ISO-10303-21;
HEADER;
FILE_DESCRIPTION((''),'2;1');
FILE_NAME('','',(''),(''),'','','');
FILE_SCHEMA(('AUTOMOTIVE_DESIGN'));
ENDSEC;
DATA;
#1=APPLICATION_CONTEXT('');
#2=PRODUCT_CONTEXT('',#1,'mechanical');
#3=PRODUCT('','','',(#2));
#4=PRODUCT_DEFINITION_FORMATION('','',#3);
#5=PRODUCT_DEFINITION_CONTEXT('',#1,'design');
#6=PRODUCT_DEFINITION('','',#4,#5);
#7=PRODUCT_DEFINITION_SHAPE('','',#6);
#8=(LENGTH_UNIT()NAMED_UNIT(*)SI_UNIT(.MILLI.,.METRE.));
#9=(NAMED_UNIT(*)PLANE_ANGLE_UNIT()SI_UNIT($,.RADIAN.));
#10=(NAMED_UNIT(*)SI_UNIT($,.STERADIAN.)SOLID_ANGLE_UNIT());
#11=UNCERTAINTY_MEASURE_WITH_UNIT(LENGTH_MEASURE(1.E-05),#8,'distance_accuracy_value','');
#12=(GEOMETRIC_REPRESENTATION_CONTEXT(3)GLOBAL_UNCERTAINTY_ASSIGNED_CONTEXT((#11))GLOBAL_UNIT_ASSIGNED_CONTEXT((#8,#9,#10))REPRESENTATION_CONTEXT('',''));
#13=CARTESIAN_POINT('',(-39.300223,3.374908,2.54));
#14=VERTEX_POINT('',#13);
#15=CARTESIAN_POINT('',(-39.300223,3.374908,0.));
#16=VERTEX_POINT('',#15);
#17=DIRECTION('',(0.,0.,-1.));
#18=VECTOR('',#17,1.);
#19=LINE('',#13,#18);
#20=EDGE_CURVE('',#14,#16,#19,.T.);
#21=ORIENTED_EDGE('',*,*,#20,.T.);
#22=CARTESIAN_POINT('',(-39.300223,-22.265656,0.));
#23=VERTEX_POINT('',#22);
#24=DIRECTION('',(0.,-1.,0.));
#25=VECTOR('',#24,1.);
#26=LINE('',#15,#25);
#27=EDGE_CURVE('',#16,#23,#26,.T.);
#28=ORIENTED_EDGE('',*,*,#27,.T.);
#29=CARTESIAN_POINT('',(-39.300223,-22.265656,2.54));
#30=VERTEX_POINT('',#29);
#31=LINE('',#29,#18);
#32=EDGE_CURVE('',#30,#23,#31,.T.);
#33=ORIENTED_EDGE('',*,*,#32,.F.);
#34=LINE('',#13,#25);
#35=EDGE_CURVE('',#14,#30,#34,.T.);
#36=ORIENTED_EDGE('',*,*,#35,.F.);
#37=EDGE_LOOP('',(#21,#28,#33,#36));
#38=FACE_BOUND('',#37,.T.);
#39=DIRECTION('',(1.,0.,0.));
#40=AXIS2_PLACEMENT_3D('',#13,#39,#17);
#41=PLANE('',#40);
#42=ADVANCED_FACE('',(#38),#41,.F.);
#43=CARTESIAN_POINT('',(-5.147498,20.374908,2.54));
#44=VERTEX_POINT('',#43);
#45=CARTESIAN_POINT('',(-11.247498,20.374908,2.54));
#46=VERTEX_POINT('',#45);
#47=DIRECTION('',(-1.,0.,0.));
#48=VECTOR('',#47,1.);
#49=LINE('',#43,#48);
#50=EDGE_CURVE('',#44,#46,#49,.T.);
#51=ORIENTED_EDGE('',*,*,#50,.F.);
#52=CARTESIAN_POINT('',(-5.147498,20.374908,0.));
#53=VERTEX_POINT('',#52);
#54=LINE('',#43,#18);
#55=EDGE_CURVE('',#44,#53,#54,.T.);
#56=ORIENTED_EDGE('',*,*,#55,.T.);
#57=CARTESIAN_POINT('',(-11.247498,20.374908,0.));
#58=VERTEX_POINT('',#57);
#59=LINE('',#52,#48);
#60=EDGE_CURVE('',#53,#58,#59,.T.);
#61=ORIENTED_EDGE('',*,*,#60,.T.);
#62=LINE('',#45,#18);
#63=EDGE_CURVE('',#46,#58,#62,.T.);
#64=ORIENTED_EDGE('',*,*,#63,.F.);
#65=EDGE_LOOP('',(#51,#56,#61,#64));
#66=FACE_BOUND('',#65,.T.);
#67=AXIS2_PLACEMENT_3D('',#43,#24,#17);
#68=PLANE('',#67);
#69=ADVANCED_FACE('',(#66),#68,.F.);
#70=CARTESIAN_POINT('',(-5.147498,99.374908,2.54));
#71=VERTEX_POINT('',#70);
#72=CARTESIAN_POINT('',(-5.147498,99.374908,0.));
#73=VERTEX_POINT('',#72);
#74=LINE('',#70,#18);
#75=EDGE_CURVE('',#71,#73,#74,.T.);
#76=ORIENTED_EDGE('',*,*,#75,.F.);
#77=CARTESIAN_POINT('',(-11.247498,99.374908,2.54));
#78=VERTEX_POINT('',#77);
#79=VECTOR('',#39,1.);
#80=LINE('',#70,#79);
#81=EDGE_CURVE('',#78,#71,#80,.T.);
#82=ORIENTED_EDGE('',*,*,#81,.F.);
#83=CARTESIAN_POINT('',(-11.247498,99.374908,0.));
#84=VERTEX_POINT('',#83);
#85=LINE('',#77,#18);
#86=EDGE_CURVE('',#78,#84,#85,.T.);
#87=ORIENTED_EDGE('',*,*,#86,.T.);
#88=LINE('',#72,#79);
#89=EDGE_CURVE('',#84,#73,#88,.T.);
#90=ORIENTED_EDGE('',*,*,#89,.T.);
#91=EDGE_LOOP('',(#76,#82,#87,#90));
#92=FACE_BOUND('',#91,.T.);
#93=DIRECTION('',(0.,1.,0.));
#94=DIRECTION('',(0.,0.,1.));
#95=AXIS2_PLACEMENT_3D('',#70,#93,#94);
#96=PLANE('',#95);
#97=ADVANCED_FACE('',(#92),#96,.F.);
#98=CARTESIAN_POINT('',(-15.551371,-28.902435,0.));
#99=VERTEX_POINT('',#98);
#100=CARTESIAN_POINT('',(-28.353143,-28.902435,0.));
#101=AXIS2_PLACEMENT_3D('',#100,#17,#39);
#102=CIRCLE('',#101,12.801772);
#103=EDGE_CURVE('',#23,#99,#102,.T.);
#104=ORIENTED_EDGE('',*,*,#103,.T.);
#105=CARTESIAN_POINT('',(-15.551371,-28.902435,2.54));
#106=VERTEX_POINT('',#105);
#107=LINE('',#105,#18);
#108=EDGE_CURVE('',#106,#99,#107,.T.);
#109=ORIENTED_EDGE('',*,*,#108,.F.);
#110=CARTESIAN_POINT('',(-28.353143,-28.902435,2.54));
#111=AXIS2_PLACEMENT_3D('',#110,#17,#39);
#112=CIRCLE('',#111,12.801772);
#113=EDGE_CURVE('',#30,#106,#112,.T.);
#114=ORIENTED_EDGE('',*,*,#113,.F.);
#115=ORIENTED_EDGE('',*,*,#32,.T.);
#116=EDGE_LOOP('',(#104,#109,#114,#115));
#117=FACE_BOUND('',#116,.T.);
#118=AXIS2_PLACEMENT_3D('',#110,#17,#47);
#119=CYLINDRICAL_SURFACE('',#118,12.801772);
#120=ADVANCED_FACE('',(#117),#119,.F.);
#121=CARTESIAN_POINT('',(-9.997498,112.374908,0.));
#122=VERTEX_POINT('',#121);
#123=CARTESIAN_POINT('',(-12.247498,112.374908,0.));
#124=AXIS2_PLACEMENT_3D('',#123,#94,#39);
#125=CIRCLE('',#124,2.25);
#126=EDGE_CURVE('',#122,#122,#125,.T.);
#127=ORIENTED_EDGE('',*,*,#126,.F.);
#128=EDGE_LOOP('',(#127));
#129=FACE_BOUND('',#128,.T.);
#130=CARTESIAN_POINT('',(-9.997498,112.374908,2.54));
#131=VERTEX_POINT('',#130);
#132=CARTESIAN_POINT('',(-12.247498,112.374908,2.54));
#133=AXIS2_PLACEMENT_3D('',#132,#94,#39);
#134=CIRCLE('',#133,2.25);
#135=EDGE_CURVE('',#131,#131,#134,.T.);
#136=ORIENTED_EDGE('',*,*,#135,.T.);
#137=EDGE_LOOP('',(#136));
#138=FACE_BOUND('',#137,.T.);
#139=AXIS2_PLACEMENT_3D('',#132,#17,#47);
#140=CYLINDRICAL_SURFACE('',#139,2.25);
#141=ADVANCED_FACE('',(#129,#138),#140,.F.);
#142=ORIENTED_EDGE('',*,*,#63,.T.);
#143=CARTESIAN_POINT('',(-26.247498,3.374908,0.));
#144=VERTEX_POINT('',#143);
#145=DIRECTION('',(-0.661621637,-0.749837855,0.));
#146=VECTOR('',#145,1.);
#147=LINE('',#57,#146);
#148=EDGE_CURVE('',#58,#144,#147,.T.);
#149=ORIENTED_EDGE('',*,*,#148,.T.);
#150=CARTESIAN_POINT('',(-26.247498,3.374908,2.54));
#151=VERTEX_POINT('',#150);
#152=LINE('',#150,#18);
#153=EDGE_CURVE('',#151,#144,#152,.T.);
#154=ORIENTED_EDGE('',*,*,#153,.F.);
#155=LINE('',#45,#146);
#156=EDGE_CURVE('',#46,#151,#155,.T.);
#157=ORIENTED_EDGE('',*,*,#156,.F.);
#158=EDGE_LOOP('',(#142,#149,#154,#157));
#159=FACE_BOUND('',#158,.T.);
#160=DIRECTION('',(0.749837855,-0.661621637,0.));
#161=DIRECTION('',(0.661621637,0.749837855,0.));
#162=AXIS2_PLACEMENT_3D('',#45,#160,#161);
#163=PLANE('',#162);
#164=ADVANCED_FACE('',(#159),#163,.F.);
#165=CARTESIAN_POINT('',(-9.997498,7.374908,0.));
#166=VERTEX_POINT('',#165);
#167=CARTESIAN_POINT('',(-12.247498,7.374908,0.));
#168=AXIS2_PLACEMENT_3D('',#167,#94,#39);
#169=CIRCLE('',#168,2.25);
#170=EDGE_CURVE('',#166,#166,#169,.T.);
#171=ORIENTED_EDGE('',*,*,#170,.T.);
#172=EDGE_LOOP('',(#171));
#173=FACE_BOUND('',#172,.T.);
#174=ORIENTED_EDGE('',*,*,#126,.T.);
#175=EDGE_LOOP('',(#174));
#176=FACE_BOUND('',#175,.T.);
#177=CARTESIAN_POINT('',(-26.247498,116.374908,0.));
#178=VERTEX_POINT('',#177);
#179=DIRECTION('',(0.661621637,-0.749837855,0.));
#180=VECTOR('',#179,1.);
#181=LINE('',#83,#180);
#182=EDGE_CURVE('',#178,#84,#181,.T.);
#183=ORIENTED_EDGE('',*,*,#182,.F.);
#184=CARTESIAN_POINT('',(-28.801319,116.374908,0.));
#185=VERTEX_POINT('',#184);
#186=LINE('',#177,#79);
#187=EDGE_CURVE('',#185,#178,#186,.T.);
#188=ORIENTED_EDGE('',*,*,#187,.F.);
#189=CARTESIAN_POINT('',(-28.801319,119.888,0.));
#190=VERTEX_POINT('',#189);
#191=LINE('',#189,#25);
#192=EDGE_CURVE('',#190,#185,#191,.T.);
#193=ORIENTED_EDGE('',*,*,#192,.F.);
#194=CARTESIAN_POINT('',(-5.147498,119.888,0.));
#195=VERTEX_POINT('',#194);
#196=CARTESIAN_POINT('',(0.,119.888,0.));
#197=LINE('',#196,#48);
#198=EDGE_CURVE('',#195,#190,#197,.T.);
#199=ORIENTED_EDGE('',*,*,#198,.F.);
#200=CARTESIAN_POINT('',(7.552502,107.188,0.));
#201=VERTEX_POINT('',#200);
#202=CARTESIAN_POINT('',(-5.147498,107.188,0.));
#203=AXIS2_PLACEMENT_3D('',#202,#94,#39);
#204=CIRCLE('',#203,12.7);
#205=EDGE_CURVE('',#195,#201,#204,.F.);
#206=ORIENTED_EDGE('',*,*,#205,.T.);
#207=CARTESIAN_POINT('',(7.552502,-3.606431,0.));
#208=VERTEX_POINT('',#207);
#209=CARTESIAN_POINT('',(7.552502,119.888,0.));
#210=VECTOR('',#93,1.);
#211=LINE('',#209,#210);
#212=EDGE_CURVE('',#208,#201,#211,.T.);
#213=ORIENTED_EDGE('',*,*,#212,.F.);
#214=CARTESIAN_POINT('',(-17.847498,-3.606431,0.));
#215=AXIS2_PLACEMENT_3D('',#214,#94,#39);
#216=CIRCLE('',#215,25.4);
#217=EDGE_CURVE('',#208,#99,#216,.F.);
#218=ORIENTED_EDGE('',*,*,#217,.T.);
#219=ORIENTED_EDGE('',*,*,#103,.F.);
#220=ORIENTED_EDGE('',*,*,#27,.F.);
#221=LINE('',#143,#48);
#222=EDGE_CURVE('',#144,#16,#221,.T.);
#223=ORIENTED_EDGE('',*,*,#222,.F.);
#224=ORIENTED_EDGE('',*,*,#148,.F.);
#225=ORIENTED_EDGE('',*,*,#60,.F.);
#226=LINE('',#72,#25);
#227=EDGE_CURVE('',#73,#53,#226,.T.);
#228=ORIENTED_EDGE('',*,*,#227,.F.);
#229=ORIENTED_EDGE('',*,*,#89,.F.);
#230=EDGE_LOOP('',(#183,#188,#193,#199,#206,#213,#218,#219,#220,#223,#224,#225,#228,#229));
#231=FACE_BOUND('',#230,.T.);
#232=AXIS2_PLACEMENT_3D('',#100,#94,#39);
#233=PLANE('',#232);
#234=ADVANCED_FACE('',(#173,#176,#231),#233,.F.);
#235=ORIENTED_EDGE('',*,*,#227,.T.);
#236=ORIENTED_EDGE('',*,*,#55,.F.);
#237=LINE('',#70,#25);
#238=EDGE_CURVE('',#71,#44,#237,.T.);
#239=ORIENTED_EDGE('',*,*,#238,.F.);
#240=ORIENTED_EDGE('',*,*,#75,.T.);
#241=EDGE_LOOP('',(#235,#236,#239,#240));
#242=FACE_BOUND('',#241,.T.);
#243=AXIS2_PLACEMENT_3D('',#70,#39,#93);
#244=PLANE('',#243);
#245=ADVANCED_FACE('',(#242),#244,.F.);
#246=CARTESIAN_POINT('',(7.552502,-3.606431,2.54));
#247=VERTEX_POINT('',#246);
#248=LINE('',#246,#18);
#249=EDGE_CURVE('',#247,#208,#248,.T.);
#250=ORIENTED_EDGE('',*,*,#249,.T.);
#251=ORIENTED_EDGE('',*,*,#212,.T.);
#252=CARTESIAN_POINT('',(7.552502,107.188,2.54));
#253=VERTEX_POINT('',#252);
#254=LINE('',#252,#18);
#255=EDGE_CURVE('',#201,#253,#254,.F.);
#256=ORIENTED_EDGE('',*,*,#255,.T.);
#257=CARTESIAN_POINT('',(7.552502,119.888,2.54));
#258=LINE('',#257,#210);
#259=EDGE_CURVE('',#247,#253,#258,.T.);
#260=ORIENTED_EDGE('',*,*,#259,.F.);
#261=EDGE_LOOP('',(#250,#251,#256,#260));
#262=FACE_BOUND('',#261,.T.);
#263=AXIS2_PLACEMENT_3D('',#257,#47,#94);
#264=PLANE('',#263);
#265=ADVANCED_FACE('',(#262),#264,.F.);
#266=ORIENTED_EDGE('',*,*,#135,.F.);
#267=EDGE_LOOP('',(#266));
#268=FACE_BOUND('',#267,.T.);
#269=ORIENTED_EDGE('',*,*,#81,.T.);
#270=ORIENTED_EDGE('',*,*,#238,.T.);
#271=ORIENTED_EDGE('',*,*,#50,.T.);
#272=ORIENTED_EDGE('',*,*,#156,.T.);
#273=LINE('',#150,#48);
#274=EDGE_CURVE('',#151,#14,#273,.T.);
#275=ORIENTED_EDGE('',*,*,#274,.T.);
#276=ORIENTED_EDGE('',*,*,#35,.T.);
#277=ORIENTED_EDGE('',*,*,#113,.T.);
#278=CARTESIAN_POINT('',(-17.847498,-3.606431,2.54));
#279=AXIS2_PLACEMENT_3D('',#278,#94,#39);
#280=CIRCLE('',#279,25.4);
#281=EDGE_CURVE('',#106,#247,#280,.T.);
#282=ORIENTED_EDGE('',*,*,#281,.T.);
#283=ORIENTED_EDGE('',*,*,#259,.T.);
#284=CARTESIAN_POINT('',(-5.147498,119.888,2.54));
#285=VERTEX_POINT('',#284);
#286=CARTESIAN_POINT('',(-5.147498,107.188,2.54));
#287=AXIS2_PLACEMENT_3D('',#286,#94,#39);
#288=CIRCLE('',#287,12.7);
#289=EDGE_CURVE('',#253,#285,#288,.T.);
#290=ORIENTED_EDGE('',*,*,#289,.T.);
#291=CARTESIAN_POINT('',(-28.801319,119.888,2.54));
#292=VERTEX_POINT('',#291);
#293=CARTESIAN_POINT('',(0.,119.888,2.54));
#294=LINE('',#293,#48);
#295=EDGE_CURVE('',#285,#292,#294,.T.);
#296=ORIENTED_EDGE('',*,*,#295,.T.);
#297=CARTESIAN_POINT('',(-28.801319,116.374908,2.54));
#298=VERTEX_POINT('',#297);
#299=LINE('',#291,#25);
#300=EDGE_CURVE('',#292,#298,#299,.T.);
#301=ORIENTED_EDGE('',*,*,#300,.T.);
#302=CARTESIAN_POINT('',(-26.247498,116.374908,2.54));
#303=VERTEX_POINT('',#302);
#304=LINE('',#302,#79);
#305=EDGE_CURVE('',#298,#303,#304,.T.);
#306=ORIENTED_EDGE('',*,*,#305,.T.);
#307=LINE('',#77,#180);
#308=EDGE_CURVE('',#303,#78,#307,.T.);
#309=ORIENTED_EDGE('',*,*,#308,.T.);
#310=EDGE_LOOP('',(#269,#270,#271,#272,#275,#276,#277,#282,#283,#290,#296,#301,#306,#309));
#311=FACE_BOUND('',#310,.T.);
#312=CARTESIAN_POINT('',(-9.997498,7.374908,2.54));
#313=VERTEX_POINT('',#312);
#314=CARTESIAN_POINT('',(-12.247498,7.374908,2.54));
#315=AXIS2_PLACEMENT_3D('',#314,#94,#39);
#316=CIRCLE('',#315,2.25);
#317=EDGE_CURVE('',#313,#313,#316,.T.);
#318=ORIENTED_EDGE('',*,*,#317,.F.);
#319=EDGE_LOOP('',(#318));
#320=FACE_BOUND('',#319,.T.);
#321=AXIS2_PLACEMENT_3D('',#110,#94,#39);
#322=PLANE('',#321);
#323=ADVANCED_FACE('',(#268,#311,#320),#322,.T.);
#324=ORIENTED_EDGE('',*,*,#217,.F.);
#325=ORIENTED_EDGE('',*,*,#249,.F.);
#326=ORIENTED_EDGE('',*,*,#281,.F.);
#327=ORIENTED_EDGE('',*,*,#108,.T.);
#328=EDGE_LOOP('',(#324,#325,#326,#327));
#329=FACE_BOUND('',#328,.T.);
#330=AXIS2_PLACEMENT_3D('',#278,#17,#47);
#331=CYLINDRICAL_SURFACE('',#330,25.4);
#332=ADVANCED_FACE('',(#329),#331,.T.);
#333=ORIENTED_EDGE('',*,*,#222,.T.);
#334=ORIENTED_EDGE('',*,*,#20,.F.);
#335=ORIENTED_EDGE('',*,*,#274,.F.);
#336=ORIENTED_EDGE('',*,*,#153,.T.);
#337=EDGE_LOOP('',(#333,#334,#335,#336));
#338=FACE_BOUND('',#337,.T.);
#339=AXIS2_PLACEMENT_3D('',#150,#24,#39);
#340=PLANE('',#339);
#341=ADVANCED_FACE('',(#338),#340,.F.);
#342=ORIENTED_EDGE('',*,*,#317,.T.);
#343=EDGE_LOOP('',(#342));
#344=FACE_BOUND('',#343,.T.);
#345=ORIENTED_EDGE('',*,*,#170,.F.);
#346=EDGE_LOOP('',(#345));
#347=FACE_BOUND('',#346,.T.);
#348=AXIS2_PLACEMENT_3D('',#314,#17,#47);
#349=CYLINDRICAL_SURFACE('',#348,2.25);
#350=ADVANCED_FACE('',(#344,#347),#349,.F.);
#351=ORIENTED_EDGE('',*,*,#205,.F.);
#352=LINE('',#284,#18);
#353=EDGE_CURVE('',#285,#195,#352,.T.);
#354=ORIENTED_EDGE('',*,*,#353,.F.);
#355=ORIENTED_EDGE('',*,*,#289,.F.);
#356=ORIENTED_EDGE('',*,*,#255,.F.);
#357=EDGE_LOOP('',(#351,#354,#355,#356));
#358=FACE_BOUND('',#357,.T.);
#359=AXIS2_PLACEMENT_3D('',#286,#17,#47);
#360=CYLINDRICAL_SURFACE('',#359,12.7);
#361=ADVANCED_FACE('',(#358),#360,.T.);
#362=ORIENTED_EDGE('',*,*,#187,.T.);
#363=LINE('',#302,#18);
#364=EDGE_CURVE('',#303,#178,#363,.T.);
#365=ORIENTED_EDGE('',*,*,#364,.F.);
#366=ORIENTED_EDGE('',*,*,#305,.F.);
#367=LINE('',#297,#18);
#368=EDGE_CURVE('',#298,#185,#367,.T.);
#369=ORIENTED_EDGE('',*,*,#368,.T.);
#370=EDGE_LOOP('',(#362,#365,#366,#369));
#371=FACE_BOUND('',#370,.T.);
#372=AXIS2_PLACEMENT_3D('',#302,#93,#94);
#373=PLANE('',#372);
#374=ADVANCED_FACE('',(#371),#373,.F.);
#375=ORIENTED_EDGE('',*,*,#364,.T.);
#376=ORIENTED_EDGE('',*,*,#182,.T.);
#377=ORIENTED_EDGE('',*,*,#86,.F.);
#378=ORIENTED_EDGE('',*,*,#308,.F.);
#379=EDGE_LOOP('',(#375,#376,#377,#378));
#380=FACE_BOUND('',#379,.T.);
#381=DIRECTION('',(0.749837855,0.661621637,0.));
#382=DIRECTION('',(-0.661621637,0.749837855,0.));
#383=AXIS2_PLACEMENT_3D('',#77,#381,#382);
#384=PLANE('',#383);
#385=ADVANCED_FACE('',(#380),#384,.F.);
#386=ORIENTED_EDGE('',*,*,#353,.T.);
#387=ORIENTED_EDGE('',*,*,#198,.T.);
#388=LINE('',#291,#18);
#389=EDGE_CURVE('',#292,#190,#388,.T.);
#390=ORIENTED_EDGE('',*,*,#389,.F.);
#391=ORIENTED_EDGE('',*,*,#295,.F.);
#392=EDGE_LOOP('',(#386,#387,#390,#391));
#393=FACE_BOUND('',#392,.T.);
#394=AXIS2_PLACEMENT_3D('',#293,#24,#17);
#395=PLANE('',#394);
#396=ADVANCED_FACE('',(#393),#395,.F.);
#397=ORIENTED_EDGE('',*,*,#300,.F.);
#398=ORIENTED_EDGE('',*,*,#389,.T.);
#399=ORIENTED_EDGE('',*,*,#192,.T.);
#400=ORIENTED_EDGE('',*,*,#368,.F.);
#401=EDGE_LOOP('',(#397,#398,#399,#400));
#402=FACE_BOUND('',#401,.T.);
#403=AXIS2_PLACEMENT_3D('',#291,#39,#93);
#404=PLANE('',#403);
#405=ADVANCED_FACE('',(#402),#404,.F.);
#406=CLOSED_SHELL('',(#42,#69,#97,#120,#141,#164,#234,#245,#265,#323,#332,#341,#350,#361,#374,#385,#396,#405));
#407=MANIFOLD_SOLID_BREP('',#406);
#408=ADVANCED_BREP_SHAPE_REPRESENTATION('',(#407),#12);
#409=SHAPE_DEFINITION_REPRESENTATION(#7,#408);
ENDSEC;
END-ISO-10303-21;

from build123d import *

# Parameters (mm, degrees)
SKETCH1_R           = 2.25
BOSS_EXTRUDE1_DEPTH = 2.54
FILLET2_R           = 12.7
FILLET1_R           = 25.4


with BuildPart() as part:
    # Sketch1 → Boss-Extrude1 (new body)
    with BuildSketch(Plane.XY):
        with BuildLine():
            Line((-15.551371247, -28.902434831), (0, -28.902434831))
            Line((0, -28.902434831), (7.55250204, -28.902434831))
            Line((7.55250204, -28.902434831), (7.55250204, 119.888))
            Line((7.55250204, 119.888), (0, 119.888))
            Line((0, 119.888), (-28.801319167, 119.888))
            Line((-28.801319167, 119.888), (-28.801319167, 116.374908255))
            Line((-28.801319167, 116.374908255), (-26.247498299, 116.374908255))
            Line((-26.247498299, 116.374908255), (-11.247498299, 99.374908255))
            Line((-11.247498299, 99.374908255), (-5.147498299, 99.374908255))
            Line((-5.147498299, 99.374908255), (-5.147498299, 20.374908255))
            Line((-5.147498299, 20.374908255), (-11.247498299, 20.374908255))
            Line((-11.247498299, 20.374908255), (-26.247498299, 3.374908255))
            Line((-26.247498299, 3.374908255), (-39.300222509, 3.374908255))
            Line((-39.300222509, 3.374908255), (-39.300222509, -22.265655957))
            ThreePointArc((-39.300222509, -22.265655957), (-24.907613028, -16.573051533), (-15.551371247, -28.902434831))
        make_face()
        with Locations((-12.247498299, 112.374908255)):
            Circle(SKETCH1_R, mode=Mode.SUBTRACT)
        with Locations((-12.247498299, 7.374908255)):
            Circle(SKETCH1_R, mode=Mode.SUBTRACT)
    extrude(amount=BOSS_EXTRUDE1_DEPTH)

    # Fillet2
    fillet2_edges = [part.edges().sort_by_distance(p)[0] for p in [
        (7.55250204, 119.888, 1.27),
    ]]
    fillet(fillet2_edges, radius=FILLET2_R)

    # Fillet1
    # the kernel refuses this fillet: 25.4 mm, written as the material it takes off along each edge
    with BuildSketch(Plane(origin=(7.55250204, -28.902434831, -63.240009197), x_dir=(0, 1, 0), z_dir=(0, 0, 1))) as fillet1_piece_1:
        with BuildLine():
            CenterArc((25.296003679, 25.4), FILLET1_R, 185.186543812, 84.813456188)
            Line((0, 23.103873287), (-0.505920074, 23.057950753))
            ThreePointArc((-0.505920074, 23.057950753), (-0.508, 11.551936644), (-0.508, 0))
            Line((-0.508, 0), (0, -0.508))
            Line((0, -0.508), (25.296003679, -0.508))
            Line((25.296003679, -0.508), (25.296003679, 0))
        make_face()
    extrude(amount=129.020018394, mode=Mode.SUBTRACT)


solid = part.part
